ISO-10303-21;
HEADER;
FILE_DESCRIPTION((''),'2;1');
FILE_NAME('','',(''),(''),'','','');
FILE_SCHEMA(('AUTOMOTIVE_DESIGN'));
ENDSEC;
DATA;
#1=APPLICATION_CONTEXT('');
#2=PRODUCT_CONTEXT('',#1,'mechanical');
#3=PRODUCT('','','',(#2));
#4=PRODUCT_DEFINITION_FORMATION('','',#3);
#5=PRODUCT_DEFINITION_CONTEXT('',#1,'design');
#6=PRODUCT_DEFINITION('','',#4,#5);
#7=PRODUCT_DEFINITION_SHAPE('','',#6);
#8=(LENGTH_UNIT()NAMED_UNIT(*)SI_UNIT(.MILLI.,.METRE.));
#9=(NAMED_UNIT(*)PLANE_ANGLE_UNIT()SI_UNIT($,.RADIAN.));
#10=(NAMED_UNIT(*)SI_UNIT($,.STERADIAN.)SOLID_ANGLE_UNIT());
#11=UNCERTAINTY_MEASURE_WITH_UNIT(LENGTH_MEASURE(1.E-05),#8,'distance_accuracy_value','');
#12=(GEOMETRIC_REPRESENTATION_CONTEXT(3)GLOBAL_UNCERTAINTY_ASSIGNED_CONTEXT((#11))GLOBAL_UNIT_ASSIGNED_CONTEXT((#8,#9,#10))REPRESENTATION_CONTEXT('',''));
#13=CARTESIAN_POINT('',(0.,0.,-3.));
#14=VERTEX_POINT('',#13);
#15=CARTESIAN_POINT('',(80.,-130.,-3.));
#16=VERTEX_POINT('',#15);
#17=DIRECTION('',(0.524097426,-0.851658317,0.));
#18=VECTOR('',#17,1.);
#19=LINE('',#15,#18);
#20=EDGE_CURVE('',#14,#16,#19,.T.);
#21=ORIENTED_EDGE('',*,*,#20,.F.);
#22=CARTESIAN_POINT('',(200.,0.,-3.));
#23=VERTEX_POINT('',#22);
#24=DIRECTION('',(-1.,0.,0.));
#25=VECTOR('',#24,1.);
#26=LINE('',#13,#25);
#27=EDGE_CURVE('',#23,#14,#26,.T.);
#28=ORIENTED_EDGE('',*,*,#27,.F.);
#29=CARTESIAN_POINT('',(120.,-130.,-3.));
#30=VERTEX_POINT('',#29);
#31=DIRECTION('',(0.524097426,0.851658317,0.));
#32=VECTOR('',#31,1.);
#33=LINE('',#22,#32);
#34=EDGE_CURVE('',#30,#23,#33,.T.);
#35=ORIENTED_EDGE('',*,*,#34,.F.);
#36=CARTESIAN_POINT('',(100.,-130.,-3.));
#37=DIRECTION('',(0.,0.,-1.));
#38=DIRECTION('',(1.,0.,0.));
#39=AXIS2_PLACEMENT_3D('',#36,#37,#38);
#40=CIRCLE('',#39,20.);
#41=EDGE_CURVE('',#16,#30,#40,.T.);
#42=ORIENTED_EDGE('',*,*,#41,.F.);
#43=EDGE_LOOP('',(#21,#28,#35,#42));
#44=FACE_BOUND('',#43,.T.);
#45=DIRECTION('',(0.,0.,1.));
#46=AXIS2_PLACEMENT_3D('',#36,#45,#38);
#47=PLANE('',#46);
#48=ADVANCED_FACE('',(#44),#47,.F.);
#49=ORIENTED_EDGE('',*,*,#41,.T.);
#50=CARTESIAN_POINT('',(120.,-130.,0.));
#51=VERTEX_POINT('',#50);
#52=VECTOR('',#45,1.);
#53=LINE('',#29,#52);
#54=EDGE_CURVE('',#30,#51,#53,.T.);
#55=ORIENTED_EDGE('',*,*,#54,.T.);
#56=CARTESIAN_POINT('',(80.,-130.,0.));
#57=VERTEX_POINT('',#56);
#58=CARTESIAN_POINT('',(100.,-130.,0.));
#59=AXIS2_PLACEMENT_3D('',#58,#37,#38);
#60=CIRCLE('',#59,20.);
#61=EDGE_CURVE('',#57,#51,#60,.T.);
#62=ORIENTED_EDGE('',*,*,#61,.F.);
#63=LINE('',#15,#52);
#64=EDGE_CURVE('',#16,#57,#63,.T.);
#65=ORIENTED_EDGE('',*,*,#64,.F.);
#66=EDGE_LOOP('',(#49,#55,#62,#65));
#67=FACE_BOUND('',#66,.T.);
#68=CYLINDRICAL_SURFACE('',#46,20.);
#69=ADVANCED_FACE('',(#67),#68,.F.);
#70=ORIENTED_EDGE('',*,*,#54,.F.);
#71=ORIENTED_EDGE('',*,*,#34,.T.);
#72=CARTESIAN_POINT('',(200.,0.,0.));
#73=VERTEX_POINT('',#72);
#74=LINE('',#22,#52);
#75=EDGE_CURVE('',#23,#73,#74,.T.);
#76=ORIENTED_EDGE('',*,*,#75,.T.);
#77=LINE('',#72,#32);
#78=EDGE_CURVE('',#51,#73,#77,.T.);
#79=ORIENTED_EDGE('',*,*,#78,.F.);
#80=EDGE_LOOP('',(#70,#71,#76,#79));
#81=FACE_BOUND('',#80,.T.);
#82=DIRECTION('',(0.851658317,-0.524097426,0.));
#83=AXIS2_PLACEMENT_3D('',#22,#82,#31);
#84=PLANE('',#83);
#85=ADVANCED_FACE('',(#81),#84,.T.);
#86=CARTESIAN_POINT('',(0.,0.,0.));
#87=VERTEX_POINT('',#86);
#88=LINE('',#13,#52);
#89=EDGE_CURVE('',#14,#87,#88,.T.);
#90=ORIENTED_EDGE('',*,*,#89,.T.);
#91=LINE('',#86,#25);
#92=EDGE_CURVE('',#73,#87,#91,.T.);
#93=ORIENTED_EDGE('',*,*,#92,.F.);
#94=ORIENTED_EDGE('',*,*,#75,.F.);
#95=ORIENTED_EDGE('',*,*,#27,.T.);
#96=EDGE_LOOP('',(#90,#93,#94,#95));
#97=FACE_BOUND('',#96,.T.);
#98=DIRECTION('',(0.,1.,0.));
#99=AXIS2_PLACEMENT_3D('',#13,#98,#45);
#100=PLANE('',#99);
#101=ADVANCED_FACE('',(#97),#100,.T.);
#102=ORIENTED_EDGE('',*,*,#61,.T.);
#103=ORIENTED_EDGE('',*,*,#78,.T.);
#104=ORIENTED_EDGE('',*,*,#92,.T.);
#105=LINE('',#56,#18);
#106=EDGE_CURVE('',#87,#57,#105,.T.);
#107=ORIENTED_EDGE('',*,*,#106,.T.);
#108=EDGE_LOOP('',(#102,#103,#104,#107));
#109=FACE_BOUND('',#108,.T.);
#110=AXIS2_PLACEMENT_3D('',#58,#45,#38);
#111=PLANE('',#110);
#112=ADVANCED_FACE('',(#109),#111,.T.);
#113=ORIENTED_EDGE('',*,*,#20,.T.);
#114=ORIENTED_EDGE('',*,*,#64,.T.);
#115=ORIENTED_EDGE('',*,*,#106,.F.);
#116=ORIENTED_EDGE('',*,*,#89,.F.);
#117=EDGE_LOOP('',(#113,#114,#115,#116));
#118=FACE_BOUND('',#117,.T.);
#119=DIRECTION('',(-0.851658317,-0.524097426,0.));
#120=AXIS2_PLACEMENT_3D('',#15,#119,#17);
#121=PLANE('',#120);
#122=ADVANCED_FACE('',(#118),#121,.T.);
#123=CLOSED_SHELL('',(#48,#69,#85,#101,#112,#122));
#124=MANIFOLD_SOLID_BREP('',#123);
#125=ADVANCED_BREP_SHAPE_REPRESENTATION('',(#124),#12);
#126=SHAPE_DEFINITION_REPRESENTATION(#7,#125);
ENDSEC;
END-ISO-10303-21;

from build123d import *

# Parameters (mm, degrees)
BASE_FLANGE1_DEPTH = 3


# Sheet-metal steps are written as plain solids
with BuildPart() as part:
    # Sketch1 → Base-Flange1 (new body)
    with BuildSketch(Plane.XY):
        with BuildLine():
            Line((0, 0), (200, 0))
            Line((200, 0), (120, -130))
            ThreePointArc((120, -130), (100, -110), (80, -130))
            Line((80, -130), (0, 0))
        make_face()
    extrude(amount=-BASE_FLANGE1_DEPTH)


solid = part.part
